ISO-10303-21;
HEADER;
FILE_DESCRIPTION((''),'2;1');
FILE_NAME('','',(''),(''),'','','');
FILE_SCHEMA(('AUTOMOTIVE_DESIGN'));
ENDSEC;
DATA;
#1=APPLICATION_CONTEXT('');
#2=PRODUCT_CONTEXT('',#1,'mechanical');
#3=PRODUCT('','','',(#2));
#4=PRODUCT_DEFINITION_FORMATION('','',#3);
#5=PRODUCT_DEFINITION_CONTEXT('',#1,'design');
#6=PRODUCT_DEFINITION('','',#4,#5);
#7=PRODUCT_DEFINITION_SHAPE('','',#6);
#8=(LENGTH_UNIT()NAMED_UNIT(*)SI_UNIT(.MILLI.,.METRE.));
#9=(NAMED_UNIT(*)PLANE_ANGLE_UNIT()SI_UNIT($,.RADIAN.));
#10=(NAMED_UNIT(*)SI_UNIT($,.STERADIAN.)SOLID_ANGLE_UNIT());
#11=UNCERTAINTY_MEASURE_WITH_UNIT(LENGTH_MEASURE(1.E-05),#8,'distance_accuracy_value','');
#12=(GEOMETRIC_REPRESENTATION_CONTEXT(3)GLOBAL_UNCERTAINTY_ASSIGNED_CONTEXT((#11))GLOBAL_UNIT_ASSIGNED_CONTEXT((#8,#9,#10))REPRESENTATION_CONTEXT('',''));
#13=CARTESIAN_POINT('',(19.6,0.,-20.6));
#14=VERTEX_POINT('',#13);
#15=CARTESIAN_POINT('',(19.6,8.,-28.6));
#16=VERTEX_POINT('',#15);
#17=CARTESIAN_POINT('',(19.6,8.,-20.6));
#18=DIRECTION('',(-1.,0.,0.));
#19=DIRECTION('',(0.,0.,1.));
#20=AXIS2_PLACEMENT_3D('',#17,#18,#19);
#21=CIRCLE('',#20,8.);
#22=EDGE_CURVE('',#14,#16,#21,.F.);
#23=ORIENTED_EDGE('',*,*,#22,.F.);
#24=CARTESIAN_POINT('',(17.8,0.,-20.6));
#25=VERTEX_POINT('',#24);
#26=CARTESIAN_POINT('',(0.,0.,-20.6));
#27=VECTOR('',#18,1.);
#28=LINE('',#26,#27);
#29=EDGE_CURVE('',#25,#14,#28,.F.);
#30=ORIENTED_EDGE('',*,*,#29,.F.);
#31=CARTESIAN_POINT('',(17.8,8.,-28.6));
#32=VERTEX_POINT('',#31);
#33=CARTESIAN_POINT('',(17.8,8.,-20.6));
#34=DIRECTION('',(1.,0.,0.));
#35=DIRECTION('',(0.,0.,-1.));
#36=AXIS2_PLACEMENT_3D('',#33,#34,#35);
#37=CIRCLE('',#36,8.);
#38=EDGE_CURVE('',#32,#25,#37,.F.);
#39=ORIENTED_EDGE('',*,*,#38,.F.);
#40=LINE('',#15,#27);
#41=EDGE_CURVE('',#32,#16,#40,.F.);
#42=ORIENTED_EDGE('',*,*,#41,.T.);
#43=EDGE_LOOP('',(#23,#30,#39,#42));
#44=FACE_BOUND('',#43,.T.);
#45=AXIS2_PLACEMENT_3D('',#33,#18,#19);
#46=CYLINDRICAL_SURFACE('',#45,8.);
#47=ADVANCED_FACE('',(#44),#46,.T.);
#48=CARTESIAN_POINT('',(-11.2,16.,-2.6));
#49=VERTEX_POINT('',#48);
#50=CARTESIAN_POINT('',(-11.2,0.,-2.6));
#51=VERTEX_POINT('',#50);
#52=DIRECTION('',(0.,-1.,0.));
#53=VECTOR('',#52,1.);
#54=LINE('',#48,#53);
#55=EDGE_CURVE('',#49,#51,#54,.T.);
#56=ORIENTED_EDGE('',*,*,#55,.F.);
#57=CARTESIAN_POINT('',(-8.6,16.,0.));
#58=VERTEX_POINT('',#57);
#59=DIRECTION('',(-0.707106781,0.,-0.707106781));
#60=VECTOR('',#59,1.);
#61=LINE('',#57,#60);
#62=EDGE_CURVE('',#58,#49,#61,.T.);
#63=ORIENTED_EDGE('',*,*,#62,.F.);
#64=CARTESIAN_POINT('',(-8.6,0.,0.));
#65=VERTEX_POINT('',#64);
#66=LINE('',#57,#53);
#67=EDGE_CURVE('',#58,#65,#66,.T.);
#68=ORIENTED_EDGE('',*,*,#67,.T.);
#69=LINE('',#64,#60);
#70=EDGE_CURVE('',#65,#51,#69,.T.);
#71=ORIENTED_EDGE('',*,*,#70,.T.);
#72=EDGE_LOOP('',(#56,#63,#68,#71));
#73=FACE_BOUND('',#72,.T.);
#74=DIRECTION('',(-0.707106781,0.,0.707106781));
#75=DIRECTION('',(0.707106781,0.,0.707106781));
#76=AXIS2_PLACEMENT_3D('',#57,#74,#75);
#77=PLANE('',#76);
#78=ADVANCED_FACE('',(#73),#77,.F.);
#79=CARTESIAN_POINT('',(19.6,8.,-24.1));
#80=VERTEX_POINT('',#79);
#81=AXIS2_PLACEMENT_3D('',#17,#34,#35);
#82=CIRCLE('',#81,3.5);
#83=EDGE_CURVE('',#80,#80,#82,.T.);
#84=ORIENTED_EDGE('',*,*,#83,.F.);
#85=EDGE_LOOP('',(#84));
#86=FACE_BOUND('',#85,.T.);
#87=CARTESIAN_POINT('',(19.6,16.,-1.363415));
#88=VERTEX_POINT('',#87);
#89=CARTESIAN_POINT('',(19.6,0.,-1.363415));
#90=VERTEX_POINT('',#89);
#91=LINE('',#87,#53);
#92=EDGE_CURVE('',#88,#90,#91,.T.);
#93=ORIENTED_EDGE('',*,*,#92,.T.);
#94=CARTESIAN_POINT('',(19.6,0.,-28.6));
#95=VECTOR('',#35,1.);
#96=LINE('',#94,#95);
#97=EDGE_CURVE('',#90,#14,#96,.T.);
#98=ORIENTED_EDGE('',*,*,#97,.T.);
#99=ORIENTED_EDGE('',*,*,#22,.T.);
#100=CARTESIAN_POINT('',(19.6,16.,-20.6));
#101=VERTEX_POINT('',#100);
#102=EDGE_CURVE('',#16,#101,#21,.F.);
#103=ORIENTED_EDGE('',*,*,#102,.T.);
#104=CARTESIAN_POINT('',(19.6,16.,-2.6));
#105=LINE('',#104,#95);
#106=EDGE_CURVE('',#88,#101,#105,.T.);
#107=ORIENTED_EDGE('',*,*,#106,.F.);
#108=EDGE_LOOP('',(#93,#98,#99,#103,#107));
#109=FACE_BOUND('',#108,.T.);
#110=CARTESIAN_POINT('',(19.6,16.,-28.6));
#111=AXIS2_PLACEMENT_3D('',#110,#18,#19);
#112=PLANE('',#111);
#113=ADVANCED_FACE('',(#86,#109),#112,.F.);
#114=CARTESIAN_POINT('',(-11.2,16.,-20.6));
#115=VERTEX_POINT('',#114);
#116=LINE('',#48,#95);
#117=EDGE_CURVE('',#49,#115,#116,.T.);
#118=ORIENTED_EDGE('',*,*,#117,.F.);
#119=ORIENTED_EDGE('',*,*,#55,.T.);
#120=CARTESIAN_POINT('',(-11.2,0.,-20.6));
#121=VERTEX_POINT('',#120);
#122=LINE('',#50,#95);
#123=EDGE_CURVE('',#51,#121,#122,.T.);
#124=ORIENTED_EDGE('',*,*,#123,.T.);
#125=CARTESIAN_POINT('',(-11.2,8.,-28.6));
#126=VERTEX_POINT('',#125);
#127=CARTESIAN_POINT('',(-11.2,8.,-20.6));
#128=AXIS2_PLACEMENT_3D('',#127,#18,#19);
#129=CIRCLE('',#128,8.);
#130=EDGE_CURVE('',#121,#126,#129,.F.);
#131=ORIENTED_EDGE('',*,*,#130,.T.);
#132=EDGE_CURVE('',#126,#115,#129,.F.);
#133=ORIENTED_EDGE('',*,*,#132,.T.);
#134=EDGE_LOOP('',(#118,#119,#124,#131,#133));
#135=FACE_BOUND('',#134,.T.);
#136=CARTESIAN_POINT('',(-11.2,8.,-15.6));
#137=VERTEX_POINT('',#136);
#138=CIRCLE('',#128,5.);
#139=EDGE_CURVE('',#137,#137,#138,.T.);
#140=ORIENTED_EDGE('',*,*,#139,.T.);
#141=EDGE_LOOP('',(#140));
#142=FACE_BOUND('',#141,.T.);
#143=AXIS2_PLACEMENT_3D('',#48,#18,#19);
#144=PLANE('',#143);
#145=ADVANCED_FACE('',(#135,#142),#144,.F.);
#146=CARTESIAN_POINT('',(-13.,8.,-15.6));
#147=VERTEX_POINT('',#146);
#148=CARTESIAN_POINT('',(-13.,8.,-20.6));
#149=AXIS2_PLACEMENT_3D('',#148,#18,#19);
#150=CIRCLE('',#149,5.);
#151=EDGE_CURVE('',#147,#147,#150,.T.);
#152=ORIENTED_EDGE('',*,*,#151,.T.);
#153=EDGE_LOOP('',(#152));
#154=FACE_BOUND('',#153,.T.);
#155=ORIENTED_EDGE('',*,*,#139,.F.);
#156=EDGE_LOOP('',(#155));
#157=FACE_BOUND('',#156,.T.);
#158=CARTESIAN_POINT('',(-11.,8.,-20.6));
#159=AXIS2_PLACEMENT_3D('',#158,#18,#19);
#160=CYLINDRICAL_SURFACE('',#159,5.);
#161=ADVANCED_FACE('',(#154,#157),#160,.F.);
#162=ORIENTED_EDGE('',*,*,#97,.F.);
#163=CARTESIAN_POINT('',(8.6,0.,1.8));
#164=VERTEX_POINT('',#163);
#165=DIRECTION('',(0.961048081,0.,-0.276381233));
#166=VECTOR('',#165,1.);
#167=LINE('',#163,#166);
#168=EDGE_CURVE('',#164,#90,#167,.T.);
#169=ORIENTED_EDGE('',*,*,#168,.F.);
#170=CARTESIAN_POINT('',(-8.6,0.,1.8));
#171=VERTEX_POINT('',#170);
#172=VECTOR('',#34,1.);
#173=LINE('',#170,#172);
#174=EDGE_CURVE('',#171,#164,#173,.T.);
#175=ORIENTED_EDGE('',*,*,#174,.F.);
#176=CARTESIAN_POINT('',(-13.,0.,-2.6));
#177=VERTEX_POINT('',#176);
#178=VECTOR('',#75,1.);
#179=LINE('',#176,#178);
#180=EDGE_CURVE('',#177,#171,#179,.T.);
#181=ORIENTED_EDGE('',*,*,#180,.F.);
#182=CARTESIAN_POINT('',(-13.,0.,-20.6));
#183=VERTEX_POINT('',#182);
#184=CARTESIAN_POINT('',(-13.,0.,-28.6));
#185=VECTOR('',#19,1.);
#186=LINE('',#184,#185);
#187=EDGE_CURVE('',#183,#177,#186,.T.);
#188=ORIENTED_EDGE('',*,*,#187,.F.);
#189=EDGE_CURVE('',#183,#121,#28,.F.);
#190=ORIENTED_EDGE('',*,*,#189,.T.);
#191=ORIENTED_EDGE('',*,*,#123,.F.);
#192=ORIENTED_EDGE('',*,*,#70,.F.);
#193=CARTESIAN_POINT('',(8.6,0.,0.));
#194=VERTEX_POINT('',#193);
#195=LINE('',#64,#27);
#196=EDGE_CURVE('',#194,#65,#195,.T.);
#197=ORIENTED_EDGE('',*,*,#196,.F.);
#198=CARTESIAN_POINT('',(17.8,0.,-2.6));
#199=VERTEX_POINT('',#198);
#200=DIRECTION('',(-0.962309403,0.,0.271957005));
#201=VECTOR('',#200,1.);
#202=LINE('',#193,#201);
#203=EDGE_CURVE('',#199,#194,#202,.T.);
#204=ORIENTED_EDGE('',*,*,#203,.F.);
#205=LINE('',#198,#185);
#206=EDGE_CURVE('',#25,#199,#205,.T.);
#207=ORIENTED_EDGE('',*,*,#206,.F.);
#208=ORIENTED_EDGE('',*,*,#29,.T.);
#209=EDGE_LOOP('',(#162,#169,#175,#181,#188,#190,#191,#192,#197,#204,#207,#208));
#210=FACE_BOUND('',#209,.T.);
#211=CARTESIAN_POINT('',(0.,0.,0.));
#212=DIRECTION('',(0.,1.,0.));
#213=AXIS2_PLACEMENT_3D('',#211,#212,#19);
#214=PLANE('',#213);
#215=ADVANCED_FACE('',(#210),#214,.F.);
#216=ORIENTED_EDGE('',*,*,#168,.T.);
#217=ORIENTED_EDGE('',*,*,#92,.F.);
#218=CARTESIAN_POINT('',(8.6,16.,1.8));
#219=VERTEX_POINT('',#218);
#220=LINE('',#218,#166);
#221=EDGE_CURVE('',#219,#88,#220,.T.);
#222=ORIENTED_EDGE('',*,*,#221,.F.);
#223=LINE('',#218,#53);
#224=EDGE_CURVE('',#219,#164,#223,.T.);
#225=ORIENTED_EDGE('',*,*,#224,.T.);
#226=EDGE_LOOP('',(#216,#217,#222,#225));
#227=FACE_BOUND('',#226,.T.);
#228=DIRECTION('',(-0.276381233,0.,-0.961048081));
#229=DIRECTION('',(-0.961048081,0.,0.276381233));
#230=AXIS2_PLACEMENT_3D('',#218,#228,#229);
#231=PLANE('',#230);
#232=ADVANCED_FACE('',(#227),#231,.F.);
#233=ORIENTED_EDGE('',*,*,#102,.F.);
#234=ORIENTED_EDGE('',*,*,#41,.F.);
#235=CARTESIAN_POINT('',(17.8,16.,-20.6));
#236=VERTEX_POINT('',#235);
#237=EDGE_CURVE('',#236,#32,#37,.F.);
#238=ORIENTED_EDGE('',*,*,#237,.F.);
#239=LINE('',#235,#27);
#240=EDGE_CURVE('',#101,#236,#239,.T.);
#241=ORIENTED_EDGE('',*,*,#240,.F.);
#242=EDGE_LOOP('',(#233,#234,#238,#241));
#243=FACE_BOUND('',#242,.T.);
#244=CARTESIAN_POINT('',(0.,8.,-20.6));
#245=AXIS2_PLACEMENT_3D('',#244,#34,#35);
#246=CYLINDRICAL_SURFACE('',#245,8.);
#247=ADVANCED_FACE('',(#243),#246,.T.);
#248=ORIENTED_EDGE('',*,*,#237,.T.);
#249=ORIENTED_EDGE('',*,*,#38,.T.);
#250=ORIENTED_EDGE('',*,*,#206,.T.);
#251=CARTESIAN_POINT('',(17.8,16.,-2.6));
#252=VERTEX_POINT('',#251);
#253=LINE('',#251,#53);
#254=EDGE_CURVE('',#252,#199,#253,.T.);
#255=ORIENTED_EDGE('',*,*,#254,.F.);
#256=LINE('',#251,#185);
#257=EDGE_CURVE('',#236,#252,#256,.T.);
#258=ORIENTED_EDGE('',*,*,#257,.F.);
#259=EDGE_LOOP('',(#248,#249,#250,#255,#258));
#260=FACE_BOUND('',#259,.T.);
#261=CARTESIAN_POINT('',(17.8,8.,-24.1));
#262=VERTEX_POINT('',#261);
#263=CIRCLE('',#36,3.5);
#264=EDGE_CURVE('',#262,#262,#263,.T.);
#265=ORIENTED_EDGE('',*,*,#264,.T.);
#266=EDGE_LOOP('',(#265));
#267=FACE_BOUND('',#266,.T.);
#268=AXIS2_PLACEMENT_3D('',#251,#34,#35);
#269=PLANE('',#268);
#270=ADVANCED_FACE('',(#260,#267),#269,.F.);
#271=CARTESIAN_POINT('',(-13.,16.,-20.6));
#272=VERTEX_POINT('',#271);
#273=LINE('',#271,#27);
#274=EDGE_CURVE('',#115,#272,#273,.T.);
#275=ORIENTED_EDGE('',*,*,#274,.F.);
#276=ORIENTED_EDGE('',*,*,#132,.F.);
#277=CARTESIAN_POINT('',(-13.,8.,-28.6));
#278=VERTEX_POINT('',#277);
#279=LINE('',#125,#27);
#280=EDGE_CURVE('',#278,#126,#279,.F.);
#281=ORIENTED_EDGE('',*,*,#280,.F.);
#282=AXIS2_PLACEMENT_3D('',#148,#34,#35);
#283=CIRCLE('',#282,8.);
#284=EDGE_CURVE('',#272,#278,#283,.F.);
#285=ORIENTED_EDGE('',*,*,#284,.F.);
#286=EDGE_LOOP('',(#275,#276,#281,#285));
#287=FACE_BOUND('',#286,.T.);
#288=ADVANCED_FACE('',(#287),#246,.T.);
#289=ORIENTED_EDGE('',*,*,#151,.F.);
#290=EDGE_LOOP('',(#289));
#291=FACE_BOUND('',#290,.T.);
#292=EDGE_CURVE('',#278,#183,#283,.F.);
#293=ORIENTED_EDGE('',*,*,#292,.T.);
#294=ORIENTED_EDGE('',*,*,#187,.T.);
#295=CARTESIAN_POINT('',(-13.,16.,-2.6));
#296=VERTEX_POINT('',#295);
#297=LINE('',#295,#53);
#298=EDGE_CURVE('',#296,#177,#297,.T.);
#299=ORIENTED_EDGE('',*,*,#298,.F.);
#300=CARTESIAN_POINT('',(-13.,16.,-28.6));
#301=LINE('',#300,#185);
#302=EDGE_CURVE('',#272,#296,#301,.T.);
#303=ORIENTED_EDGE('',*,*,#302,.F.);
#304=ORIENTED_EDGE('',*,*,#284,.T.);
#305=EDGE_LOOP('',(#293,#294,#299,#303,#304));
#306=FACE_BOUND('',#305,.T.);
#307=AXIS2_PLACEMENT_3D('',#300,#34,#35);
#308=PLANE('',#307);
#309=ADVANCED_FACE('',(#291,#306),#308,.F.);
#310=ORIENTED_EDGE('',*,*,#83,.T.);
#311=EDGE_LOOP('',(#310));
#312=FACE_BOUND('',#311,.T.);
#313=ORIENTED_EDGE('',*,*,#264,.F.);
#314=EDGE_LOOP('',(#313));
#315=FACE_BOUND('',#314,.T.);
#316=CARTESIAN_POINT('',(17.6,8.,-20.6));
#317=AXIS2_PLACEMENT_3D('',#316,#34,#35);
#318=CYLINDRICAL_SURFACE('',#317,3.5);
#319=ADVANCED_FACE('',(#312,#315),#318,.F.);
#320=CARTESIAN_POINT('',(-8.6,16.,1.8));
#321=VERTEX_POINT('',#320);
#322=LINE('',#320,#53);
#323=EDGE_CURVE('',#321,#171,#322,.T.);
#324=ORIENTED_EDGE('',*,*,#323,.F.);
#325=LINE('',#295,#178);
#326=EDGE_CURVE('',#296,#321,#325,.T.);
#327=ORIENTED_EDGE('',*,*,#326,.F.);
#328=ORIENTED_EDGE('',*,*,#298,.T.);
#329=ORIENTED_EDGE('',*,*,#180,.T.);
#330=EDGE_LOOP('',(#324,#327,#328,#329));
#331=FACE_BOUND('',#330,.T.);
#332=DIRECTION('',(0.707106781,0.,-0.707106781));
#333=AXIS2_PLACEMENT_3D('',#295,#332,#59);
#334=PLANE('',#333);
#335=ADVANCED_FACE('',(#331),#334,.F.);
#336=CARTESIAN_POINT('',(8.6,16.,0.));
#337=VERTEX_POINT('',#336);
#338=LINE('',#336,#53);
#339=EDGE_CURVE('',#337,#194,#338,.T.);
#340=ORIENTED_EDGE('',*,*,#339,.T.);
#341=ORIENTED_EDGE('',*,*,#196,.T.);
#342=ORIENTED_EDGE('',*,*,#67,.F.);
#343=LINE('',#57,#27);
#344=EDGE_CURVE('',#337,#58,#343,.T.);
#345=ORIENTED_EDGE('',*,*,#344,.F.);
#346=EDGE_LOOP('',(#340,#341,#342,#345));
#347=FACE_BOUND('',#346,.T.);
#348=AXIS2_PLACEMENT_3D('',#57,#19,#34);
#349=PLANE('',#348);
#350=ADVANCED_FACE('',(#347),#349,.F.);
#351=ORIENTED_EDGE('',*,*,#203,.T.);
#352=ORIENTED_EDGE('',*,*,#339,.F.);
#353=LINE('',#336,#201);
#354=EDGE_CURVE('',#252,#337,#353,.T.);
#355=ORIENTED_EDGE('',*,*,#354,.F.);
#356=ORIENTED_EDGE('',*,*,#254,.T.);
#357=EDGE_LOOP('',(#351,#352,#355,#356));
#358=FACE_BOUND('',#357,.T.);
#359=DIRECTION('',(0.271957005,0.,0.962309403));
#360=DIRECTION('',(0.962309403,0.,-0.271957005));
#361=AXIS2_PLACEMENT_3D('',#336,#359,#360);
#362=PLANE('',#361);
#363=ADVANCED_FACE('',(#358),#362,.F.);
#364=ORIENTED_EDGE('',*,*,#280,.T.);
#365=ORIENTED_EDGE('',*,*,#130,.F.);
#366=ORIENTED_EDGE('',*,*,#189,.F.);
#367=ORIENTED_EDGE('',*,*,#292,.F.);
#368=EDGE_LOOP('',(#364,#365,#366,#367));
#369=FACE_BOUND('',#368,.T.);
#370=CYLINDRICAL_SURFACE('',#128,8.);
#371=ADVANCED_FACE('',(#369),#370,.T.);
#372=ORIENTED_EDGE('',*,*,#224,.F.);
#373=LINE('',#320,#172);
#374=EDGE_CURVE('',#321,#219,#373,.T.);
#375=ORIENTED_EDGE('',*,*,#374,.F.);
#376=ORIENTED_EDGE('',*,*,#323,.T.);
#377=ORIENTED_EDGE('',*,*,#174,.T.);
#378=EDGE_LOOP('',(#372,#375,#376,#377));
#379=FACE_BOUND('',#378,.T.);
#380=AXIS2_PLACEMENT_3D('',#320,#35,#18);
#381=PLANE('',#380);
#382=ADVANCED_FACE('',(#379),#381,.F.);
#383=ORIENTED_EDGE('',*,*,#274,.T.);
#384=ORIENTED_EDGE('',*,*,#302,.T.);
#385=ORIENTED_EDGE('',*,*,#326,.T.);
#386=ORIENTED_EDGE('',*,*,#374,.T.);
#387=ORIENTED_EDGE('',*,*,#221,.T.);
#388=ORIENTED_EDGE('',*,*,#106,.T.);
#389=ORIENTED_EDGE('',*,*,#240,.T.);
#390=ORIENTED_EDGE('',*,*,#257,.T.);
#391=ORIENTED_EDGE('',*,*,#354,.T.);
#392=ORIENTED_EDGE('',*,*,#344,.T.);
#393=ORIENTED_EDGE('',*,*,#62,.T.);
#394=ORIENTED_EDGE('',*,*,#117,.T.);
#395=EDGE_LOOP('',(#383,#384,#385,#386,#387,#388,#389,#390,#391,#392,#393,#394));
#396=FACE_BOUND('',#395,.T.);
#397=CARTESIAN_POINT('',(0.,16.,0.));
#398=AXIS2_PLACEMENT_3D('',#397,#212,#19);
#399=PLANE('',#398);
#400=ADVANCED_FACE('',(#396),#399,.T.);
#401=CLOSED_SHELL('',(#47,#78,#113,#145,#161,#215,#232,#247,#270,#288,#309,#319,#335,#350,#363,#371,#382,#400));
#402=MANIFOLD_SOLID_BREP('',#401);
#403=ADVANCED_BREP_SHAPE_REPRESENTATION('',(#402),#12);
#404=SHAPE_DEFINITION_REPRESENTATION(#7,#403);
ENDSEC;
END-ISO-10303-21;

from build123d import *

# Parameters (mm, degrees)
EXTRUDE_1_DEPTH     = 16
FILLET_2_R          = 8
SKETCH_2_R          = 5
CUT_EXTRUDE_1_DEPTH = 2
SKETCH_3_R          = 3.5
CUT_EXTRUDE_2_DEPTH = 2


with BuildPart() as part:
    # 草图1 → 凸台-拉伸1 (new body)
    with BuildSketch(Plane(origin=(0, 0, 0), x_dir=(1, 0, 0), z_dir=(0, 1, 0))):
        Polygon((-8.6, 0), (8.6, 0), (17.8, 2.6), (17.8, 28.6), (19.6, 28.6), (19.6, 2.6), (19.6, 1.363414634), (8.6, -1.8), (-8.6, -1.8), (-13, 2.6), (-13, 28.6), (-11.2, 28.6), (-11.2, 2.6), align=None)
    extrude(amount=EXTRUDE_1_DEPTH)

    # 圆角2
    fillet_2_edges = [part.edges().sort_by_distance(p)[0] for p in [
        (18.7, 0, -28.6),
        (18.7, 16, -28.6),
        (-12.1, 0, -28.6),
        (-12.1, 16, -28.6),
    ]]
    fillet(fillet_2_edges, radius=FILLET_2_R - 0.0001)  # a hair under: the kernel refuses the full size

    # 草图2 → 切除-拉伸1 (cut)
    with BuildSketch(Plane.ZY.offset(13)):
        with Locations((-20.6, 8)):
            Circle(SKETCH_2_R)
    extrude(amount=-CUT_EXTRUDE_1_DEPTH, mode=Mode.SUBTRACT)

    # 草图3 → 切除-拉伸2 (cut)
    with BuildSketch(Plane(origin=(19.6, 0, 0), x_dir=(0, 0, -1), z_dir=(1, 0, 0))):
        with Locations((20.6, 8)):
            Circle(SKETCH_3_R)
    extrude(amount=-CUT_EXTRUDE_2_DEPTH, mode=Mode.SUBTRACT)


solid = part.part
